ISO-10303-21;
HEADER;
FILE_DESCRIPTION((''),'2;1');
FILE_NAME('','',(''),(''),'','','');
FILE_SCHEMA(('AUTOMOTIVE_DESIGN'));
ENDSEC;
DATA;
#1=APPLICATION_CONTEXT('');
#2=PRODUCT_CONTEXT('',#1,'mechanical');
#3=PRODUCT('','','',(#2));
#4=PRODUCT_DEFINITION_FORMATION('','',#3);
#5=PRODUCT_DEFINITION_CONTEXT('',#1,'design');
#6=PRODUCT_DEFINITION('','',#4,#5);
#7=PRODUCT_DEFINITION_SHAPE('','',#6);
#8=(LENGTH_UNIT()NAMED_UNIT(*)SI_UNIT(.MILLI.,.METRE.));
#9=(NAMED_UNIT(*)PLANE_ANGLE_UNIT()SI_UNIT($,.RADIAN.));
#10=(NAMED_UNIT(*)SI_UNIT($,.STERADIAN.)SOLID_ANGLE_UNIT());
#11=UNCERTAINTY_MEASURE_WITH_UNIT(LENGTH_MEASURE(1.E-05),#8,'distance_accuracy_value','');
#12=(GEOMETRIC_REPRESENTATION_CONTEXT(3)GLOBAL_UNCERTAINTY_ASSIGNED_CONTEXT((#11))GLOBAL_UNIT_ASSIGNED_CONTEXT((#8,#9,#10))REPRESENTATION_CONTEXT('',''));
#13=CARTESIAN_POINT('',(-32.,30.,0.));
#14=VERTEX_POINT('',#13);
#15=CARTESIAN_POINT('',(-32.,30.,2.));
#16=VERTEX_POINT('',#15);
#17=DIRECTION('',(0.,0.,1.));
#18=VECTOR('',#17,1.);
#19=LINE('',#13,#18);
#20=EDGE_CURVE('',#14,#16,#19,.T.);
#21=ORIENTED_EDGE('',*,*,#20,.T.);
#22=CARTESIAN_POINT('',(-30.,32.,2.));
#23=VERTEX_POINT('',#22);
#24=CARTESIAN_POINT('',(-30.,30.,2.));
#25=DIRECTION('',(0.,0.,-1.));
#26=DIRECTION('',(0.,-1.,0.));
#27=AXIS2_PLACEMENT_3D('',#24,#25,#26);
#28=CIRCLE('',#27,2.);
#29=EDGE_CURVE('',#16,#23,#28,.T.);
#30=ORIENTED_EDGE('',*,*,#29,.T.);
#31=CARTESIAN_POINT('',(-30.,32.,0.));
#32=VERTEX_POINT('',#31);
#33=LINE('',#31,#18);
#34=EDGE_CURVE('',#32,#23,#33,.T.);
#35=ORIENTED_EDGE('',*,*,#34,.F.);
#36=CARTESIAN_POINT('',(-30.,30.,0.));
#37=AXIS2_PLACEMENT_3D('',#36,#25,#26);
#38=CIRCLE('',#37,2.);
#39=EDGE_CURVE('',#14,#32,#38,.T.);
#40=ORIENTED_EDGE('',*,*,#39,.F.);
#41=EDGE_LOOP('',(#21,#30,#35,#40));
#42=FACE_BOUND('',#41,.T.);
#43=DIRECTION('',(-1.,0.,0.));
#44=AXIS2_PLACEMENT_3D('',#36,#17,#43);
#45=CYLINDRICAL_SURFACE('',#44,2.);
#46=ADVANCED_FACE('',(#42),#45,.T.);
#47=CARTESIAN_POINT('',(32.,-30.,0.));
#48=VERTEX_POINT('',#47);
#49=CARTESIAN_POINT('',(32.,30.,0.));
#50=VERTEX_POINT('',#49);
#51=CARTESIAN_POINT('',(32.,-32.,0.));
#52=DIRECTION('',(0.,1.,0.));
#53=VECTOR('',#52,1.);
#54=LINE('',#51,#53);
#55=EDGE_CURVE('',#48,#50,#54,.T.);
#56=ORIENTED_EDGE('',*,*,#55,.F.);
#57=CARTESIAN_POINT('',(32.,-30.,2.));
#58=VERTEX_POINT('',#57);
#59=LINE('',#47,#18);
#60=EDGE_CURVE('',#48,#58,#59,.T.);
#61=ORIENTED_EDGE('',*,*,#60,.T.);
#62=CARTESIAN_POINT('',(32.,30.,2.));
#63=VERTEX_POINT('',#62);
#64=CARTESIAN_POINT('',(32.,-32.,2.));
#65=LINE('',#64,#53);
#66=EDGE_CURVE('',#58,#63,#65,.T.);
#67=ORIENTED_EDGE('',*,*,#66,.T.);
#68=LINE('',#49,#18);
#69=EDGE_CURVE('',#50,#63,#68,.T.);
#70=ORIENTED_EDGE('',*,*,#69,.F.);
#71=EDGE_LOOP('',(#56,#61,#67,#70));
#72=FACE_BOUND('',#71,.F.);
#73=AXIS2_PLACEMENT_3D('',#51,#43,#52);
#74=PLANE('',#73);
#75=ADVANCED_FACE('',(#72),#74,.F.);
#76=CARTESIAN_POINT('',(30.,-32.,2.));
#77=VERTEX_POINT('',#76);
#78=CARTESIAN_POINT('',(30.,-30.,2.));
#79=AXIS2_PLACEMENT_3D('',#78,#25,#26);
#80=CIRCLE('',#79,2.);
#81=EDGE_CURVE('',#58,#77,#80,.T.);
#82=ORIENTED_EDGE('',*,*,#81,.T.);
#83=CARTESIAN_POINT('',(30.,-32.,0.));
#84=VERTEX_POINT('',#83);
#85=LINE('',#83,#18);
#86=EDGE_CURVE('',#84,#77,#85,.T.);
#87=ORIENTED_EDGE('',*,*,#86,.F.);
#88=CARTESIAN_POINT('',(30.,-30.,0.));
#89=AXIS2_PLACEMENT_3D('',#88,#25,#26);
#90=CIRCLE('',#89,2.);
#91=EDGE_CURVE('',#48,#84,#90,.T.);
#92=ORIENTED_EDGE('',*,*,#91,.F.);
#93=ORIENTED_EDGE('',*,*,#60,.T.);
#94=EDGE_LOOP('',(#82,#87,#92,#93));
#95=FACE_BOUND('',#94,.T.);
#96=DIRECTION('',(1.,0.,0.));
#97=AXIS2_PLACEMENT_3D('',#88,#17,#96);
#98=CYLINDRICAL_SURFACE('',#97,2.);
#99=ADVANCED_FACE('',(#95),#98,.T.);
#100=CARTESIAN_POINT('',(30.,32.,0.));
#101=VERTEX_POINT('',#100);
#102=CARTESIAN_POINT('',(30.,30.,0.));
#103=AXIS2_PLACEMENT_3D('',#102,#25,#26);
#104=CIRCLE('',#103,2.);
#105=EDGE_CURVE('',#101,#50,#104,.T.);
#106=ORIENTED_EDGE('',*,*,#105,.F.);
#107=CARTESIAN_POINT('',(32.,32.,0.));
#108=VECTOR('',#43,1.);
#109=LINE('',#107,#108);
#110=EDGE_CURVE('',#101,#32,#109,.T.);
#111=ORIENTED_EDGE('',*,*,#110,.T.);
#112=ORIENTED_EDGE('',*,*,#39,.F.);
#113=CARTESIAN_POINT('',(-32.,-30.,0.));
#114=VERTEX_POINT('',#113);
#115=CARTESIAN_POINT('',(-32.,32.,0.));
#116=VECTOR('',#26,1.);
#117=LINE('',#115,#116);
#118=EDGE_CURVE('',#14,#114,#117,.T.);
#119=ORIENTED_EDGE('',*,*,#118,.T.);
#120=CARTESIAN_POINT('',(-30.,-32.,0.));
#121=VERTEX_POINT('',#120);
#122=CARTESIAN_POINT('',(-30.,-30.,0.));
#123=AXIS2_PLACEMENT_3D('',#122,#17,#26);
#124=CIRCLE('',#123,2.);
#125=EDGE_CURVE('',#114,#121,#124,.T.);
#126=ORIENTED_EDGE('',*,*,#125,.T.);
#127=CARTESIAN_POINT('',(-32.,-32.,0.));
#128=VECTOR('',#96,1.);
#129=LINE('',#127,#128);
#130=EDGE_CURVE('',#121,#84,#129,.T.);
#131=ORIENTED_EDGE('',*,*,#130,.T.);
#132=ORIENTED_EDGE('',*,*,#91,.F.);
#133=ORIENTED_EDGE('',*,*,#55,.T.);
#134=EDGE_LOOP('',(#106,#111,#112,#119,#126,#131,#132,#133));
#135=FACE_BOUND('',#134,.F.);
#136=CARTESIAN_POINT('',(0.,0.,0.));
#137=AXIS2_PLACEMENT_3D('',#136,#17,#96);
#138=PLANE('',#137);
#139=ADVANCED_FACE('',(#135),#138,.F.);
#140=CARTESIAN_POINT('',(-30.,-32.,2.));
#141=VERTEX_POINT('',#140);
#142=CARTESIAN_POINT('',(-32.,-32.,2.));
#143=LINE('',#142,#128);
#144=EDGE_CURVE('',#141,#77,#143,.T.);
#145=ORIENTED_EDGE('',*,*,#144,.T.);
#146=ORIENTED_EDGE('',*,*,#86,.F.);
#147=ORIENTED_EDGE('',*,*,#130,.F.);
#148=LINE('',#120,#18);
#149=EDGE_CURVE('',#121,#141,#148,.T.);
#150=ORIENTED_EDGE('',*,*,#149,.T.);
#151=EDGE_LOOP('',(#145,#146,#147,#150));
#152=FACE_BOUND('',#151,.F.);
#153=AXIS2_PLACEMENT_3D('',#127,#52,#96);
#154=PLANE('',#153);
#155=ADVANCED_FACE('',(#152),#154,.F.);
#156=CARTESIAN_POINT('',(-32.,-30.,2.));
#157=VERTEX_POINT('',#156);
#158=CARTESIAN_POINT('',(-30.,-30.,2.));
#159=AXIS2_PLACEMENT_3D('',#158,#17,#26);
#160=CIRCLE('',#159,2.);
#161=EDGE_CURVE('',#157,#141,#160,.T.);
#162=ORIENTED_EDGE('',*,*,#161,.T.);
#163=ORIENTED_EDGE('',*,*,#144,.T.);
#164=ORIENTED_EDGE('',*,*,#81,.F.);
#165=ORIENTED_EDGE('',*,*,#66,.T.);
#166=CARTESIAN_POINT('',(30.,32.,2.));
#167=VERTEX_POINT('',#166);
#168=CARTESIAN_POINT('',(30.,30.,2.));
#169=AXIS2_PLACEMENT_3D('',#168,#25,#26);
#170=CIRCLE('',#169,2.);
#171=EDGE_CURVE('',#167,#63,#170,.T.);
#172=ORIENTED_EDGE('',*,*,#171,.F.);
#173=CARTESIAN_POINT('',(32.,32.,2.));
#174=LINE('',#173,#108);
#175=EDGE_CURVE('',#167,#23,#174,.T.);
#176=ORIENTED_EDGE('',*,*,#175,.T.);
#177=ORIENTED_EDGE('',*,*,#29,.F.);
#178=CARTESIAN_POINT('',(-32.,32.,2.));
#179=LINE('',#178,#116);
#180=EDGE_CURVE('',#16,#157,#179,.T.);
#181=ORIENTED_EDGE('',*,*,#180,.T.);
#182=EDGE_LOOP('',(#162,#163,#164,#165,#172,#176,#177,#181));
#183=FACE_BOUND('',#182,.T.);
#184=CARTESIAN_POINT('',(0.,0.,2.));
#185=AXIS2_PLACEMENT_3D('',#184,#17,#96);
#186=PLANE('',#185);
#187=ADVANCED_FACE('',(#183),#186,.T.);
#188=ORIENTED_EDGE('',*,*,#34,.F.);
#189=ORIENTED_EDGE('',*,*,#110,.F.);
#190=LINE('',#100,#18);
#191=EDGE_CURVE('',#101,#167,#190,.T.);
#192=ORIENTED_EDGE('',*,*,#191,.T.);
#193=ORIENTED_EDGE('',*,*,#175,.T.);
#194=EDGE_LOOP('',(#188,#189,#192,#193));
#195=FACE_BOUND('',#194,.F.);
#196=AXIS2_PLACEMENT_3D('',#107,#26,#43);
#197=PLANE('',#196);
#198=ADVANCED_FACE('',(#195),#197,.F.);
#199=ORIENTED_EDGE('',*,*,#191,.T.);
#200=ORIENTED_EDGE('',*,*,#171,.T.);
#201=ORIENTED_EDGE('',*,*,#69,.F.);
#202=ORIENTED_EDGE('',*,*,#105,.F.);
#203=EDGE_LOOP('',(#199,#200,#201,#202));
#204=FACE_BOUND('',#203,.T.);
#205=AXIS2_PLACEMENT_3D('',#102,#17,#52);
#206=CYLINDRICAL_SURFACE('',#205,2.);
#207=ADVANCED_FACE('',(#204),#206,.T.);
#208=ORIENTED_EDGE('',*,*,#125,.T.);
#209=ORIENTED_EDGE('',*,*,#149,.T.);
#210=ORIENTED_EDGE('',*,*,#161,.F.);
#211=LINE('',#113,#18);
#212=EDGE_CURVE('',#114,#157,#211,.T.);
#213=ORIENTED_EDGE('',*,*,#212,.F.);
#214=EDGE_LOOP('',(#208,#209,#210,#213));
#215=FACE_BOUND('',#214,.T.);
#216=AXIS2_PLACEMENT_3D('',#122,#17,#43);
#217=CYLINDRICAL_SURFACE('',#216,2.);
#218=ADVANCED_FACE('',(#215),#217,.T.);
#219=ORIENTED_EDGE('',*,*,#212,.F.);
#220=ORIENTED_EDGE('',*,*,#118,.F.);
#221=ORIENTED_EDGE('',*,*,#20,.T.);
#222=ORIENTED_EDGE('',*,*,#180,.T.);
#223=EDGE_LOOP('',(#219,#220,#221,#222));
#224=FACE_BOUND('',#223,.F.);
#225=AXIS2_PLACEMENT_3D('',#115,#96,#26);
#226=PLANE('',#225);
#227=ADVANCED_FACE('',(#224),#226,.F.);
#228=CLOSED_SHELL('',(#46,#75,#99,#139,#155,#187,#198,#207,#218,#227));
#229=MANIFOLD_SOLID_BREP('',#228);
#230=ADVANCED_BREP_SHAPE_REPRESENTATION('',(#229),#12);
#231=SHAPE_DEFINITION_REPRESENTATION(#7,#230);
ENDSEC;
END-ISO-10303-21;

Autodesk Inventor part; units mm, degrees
ref_plane "YZ Plane" through (0, 0, 0) normal (1, 0, 0) x (0, 1, 0)
ref_plane "XZ Plane" through (0, 0, 0) normal (0, 1, 0) x (-1, 0, 0)
ref_plane "XY Plane" through (0, 0, 0) normal (0, 0, 1) x (1, 0, 0)
sketch "Sketch1" plane through (0, 0, 0) normal (0, 0, 1) x (1, 0, 0)
  line L0 (-32, -32) -> (32, -32)
  line L1 (32, -32) -> (32, 32)
  line L2 (32, 32) -> (-32, 32)
  line L3 (-32, 32) -> (-32, -32)
  line L4 (-32, -32) -> (32, 32) construction
  line L5 (32, -32) -> (-32, 32) construction
  point P0 (0, 0)
  dimension "d154" = 64
  dimension "d155" = 64
extrude "Plate5" add sketch "Sketch1" along normal blind 2
fillet "Corner Round1" radius 2 4 edges at (32, 32, 1) (-32, -32, 1) (-32, 32, 1) (32, -32, 1)
sketch "Sketch11" plane through (-50.5, -22, -28) normal (1, 0, 0) x (0, 0, -1)
  line L0 (-25.25, 44) -> (-25.25, 0) construction
  line L1 (0, 0) -> (-25.25, 0) construction
  line L2 (0, 0) -> (0, 44) construction
  line L3 (0, 44) -> (-25.25, 44) construction
  circle A0 centre (-10, 22) radius 5.5
  point P0 (-28, 22)
  point P1 (0, 22)
  dimension "d192" = 11
  dimension "d193" = 10
cut "Cut3" [suppressed]
feature "Corner Round3" [suppressed]
sketch "Sketch10" plane through (-34, 30, 2) normal (1, 0, 0) x (0, 1, 0)
  line L0 (-60, 0) -> (0, 0)
  line L1 (0, 0) -> (0, -30)
  line L2 (0, -30) -> (-60, -30)
  line L3 (-60, -30) -> (-60, 0)
properties part number "PRS 1200-513 FDS diam way cup" material "Stainless Steel"
